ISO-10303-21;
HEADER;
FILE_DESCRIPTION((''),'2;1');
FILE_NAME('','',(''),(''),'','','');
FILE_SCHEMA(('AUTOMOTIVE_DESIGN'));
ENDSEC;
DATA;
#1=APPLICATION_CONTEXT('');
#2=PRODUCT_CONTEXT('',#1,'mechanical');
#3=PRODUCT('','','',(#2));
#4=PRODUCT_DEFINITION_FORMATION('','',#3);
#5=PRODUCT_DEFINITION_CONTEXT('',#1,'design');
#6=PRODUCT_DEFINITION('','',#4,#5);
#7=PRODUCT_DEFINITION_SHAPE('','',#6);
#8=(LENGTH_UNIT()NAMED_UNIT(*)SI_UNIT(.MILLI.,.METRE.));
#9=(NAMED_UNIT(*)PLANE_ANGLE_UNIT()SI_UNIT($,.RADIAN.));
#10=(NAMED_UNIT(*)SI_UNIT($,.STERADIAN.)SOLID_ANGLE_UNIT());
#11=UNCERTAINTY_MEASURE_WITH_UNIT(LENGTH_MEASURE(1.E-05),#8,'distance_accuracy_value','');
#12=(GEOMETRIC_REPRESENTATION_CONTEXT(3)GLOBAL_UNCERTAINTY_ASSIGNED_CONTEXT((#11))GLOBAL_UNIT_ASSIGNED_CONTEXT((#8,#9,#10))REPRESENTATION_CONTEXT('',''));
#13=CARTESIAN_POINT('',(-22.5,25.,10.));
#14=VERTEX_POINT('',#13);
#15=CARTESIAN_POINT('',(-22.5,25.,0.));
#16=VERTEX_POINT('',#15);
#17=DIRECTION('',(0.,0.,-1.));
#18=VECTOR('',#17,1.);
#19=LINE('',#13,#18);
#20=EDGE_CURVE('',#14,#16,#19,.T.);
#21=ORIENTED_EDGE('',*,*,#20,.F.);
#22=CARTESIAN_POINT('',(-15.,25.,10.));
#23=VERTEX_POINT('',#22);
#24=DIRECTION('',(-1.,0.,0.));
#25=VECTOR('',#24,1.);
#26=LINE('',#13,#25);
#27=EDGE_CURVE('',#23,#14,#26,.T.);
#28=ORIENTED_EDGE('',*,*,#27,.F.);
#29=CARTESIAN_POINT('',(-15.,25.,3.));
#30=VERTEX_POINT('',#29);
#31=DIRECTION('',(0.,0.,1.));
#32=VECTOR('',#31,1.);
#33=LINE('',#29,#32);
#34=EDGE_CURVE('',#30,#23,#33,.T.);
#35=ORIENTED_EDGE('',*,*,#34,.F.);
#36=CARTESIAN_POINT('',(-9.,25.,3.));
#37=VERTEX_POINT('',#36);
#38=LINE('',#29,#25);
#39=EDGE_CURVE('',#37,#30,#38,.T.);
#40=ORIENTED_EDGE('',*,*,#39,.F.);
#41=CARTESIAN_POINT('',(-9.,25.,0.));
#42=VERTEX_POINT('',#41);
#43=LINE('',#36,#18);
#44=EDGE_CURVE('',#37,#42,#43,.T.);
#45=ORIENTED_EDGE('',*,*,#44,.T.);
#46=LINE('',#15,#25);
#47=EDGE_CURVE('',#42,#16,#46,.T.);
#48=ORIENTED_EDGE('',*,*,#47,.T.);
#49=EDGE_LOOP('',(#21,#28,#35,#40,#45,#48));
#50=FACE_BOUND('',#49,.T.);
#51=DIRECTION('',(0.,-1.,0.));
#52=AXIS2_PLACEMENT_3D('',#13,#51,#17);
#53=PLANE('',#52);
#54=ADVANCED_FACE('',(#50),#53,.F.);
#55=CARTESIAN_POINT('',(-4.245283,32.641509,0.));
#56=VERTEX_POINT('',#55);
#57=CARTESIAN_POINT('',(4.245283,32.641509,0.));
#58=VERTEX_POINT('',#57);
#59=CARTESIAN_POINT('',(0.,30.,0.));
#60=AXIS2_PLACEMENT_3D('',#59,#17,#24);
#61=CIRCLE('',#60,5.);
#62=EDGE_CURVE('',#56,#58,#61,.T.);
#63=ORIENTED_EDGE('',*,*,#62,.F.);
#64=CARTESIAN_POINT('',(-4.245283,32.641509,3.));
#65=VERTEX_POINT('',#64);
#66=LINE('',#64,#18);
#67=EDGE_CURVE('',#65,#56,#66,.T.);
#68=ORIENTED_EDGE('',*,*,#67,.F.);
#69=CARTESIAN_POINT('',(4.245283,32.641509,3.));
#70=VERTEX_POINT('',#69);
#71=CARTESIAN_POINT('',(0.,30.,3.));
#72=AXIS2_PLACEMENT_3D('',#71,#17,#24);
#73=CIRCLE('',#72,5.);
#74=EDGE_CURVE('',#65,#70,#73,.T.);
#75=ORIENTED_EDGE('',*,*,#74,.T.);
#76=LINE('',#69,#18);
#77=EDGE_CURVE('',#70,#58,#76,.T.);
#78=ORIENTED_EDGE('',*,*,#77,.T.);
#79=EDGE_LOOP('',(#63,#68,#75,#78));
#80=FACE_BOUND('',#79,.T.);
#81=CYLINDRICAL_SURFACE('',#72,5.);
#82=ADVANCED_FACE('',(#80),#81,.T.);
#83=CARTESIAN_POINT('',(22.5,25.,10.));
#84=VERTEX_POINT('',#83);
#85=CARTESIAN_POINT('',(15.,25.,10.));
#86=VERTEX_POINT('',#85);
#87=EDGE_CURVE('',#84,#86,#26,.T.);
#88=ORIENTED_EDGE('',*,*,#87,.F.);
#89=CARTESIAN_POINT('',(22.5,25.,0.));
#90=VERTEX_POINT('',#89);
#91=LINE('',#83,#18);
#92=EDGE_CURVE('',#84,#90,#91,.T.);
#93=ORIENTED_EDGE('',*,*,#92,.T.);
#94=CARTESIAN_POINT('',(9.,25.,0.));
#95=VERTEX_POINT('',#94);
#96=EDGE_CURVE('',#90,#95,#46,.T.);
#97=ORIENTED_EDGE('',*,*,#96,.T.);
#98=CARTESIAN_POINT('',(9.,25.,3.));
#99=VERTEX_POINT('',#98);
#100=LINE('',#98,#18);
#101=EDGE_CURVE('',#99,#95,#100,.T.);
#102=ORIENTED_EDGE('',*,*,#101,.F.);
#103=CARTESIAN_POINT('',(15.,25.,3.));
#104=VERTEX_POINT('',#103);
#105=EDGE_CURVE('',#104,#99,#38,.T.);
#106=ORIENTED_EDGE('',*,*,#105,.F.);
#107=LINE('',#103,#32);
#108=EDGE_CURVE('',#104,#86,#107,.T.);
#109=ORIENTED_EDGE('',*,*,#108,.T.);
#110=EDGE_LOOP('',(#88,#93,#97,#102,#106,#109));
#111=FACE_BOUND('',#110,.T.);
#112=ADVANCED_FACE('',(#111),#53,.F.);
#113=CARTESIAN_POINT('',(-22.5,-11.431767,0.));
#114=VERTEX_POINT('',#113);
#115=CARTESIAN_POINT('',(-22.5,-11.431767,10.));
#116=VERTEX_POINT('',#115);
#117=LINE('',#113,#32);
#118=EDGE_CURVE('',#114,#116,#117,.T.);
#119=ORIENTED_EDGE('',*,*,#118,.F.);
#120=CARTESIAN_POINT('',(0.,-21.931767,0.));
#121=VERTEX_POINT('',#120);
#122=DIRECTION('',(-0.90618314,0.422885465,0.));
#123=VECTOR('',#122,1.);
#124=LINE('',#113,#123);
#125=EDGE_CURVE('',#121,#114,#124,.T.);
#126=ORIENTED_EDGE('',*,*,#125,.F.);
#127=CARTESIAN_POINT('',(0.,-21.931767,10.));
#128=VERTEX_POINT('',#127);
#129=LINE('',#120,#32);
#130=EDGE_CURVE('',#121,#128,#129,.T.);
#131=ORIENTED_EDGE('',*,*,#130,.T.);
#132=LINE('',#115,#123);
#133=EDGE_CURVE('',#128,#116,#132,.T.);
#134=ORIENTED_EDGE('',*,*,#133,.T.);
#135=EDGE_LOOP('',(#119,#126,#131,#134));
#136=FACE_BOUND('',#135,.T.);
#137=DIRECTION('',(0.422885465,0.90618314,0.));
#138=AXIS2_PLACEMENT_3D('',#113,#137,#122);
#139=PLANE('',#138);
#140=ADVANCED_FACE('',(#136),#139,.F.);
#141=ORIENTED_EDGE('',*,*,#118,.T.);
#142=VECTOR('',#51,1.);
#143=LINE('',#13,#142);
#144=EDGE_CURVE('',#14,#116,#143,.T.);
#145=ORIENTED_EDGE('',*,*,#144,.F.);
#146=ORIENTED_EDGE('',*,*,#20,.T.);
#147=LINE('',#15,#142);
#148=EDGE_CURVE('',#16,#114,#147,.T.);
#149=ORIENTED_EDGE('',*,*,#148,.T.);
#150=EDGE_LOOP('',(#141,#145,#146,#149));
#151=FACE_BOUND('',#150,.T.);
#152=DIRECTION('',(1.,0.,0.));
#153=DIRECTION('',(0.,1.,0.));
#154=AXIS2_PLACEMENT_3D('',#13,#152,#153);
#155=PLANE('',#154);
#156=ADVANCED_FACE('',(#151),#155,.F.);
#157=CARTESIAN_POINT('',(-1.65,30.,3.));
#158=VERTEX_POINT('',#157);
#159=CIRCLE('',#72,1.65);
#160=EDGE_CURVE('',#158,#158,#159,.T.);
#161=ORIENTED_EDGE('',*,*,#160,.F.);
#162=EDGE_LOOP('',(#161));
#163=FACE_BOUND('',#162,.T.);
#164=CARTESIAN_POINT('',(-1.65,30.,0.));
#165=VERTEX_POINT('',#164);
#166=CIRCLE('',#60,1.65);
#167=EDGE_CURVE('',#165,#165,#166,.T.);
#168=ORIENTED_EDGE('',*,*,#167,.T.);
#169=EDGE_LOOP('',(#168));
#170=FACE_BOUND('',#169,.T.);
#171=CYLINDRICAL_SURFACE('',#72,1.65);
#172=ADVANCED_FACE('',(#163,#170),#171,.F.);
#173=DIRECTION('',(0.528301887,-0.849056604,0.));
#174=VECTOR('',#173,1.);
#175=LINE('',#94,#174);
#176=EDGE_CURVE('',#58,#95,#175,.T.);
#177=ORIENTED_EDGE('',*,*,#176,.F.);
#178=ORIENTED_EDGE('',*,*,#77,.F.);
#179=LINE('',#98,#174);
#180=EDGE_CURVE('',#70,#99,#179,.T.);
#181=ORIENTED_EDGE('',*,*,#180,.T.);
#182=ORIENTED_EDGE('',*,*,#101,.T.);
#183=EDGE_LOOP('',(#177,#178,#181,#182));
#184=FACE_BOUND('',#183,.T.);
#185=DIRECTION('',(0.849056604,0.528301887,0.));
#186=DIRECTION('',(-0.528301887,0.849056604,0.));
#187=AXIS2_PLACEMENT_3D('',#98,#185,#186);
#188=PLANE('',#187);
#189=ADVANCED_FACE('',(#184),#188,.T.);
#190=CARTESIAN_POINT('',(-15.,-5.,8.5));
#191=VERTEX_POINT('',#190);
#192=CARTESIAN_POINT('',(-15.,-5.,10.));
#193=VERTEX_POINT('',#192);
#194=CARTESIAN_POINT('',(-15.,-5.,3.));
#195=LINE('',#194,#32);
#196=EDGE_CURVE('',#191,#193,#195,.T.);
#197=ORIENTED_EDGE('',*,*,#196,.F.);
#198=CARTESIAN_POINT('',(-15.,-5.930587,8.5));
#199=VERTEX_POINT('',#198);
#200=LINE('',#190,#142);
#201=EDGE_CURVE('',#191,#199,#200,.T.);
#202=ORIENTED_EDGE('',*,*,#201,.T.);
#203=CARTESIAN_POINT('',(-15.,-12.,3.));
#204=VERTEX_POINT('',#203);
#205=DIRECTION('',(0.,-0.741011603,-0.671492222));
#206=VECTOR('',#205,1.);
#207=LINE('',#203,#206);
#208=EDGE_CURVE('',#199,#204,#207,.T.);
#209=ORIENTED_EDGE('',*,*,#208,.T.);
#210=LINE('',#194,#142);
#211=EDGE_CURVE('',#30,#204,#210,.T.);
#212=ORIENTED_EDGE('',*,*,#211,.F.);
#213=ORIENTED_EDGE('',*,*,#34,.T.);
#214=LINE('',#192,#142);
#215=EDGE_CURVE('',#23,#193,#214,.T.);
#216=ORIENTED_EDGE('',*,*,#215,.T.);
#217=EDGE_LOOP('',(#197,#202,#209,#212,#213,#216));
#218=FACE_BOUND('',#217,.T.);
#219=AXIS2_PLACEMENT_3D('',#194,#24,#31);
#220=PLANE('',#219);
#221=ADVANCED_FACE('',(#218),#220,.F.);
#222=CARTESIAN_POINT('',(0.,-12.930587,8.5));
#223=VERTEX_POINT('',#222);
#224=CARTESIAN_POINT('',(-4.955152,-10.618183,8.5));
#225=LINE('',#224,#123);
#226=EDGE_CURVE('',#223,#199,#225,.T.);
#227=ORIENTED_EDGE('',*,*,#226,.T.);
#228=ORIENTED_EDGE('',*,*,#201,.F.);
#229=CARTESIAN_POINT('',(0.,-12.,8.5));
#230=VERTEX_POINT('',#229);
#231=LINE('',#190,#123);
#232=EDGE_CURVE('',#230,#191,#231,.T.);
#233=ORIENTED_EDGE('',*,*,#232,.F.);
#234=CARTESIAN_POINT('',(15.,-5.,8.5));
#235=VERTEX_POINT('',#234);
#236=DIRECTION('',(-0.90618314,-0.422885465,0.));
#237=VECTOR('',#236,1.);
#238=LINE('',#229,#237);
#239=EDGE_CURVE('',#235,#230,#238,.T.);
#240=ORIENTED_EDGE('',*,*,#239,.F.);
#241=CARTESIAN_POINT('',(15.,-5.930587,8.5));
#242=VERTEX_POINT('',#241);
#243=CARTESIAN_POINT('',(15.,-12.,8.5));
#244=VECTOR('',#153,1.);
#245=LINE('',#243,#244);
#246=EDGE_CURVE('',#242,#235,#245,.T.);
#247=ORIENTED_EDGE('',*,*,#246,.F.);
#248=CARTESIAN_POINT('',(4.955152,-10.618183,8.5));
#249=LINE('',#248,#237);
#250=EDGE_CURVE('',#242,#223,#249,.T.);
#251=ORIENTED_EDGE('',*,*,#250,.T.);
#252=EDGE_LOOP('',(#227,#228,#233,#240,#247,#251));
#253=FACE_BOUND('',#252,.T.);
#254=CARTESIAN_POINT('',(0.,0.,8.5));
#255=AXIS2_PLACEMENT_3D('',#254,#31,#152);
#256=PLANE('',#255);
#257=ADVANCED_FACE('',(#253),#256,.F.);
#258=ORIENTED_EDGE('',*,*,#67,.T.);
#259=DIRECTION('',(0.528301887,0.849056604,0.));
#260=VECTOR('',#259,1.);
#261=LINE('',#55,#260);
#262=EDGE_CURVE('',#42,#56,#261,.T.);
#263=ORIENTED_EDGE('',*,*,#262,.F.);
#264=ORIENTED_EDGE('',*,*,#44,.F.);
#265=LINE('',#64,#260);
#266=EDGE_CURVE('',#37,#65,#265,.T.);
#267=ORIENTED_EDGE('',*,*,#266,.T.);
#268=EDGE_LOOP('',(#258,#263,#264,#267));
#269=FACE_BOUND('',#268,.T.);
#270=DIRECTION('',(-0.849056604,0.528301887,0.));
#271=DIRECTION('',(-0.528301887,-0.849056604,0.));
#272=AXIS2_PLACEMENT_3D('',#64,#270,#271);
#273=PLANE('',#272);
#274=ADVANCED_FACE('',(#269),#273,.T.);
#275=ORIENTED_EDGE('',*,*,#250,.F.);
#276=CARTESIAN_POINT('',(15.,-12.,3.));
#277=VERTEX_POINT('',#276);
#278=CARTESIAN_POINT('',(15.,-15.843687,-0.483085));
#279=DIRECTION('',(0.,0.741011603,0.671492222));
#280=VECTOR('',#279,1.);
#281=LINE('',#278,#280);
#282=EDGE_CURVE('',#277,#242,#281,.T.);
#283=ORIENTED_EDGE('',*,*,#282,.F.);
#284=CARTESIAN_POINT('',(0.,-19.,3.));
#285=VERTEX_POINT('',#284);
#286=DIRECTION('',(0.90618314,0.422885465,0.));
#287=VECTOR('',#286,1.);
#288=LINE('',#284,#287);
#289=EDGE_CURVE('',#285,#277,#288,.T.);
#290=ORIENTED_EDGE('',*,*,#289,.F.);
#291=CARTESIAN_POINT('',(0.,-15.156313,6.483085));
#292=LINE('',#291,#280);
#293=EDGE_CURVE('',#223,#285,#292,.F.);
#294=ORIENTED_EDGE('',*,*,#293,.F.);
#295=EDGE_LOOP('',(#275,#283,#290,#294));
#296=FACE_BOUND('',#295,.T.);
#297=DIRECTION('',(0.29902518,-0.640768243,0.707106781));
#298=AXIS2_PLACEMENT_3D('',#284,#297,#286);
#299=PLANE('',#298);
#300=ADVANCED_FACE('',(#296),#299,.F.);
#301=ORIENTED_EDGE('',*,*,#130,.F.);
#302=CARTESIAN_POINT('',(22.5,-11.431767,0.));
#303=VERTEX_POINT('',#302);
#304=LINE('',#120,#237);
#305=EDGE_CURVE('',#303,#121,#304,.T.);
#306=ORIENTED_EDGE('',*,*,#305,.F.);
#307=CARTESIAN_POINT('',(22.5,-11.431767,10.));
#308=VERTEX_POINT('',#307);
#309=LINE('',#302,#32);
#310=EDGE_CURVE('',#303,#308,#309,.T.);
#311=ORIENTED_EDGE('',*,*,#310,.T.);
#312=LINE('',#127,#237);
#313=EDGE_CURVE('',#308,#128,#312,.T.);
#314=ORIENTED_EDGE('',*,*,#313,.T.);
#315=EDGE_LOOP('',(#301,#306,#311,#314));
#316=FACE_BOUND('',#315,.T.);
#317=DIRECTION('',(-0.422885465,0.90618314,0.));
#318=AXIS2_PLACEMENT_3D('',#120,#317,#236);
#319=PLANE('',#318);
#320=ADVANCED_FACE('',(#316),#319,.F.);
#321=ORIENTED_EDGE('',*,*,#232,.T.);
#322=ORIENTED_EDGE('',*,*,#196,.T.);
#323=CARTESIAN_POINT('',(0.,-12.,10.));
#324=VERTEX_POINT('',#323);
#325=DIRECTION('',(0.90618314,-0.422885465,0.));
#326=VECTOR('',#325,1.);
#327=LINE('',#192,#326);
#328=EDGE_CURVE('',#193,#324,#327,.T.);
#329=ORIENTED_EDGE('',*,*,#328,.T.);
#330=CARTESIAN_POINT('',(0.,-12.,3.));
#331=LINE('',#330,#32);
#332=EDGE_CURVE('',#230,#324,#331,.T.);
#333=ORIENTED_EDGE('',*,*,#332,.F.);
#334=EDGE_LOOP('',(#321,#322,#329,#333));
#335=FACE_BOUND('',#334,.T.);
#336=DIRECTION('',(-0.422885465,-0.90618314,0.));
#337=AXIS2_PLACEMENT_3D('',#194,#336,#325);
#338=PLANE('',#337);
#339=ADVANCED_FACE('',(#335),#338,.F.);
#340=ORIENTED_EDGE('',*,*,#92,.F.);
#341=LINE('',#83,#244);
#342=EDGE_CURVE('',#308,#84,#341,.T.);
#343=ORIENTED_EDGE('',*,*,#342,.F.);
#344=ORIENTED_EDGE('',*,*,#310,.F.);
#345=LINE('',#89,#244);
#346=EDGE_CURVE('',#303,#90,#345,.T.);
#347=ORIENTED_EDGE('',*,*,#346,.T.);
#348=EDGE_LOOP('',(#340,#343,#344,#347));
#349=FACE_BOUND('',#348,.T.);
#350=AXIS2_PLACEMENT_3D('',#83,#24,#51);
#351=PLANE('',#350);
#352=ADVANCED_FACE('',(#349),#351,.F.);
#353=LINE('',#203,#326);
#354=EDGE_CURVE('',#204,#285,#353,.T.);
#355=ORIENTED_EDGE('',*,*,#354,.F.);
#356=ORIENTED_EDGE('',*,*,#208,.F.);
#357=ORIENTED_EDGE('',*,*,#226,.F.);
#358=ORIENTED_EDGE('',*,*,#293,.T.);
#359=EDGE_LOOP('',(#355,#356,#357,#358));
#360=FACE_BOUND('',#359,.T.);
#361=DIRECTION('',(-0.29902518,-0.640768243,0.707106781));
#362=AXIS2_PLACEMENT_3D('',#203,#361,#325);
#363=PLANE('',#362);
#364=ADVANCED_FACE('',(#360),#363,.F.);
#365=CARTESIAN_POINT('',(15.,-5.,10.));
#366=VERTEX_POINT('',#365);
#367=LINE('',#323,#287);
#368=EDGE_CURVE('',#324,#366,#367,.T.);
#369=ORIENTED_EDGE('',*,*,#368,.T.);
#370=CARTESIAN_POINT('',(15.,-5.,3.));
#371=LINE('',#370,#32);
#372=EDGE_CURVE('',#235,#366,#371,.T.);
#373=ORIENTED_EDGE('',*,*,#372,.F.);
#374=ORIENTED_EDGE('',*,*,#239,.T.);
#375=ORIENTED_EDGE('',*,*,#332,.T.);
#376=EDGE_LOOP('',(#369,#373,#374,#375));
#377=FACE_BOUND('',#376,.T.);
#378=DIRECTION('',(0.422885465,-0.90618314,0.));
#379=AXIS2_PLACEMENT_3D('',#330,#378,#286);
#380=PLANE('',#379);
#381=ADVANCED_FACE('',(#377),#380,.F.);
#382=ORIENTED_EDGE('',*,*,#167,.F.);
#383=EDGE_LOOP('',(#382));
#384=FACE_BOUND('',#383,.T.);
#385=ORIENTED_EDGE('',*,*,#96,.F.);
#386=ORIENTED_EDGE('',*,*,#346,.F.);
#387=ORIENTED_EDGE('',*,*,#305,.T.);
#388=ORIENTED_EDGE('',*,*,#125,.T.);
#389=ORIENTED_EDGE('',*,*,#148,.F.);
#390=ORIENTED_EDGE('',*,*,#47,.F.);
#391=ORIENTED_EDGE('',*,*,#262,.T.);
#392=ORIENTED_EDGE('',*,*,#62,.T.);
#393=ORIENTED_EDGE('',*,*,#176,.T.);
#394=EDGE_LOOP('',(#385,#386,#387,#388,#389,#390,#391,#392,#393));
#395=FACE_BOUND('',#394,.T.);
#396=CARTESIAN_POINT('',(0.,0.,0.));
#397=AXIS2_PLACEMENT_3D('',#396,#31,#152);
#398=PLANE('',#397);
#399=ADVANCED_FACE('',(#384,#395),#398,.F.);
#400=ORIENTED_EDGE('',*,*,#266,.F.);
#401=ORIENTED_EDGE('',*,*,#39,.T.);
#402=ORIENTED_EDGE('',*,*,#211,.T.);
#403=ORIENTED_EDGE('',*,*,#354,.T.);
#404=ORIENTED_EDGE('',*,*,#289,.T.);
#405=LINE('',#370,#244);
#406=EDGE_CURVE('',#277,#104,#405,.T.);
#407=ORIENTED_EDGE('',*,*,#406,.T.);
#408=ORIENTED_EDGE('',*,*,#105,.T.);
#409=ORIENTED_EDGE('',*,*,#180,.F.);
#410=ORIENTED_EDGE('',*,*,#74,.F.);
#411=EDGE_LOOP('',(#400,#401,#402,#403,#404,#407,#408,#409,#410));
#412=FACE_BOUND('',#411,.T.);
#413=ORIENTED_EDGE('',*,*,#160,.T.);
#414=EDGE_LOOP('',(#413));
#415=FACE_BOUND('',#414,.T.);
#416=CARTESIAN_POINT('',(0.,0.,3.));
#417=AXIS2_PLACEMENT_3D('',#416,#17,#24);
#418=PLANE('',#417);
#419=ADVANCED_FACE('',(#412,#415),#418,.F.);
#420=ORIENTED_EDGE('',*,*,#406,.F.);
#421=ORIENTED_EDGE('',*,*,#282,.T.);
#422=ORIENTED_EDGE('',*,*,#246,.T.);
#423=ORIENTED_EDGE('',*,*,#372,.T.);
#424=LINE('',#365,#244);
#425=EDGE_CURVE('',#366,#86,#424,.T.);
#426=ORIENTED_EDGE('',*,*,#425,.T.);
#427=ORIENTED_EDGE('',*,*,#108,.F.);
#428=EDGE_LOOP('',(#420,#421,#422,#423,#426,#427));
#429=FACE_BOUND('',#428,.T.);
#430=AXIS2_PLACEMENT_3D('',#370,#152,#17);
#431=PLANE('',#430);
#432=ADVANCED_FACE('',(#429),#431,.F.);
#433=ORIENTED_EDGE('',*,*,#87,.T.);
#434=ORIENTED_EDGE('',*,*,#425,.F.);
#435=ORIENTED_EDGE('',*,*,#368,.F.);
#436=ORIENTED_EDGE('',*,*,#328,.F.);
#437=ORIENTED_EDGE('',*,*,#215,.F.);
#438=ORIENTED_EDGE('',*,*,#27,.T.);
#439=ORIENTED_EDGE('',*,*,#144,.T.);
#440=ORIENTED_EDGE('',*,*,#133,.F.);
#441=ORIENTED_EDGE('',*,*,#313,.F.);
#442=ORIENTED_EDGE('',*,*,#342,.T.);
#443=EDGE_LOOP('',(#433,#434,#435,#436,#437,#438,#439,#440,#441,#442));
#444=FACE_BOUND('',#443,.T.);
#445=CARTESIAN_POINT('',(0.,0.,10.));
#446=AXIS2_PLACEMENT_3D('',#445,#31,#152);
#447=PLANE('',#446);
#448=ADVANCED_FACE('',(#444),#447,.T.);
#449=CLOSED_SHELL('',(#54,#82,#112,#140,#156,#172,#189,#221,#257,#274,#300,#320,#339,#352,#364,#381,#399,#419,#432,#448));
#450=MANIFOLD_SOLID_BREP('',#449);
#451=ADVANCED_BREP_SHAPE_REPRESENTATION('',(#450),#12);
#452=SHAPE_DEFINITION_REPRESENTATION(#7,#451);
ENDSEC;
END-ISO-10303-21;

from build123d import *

# Parameters (mm, degrees)
ESBO_O1_W                = 45
ESBO_O1_H                = 50
RESSALTO_EXTRUS_O1_DEPTH = 10
CORTE_EXTRUS_O1_DEPTH    = 7
CORTE_EXTRUS_O2_DEPTH    = 5.5
CHANFRO1_SIZE            = 5.5
ESBO_O4_R                = 1.65
RESSALTO_EXTRUS_O2_DEPTH = 3
CORTE_EXTRUS_O3_DEPTH    = 43.793106922


with BuildPart() as part:
    # Esboço1 → Ressalto-extrusão1 (new body)
    with BuildSketch(Plane.XY):
        Rectangle(ESBO_O1_W, ESBO_O1_H)
    extrude(amount=RESSALTO_EXTRUS_O1_DEPTH)

    # Esboço2 → Corte-extrusão1 (cut)
    with BuildSketch(Plane.XY.offset(10)):
        Polygon((-15, -5), (0, -12), (15, -5), (15, 25), (-15, 25), align=None)
    extrude(amount=-CORTE_EXTRUS_O1_DEPTH, mode=Mode.SUBTRACT)

    # Esboço3 → Corte-extrusão2 (cut)
    with BuildSketch(Plane.XY.offset(3)):
        Polygon((-15, -5), (-15, -12), (0, -19), (15, -12), (15, -5), align=None)
    extrude(amount=CORTE_EXTRUS_O2_DEPTH, mode=Mode.SUBTRACT)

    # Chanfro1
    chanfro1_edges = [part.edges().sort_by_distance(p)[0] for p in [
        (-7.5, -15.5, 8.5),
        (7.5, -15.5, 8.5),
    ]]
    chamfer(chanfro1_edges, length=CHANFRO1_SIZE - 0.0001)  # a hair under: the kernel refuses the full size

    # Esboço4 → Ressalto-extrusão2 (add)
    with BuildSketch(Plane(origin=(0, 0, 0), x_dir=(-1, 0, 0), z_dir=(0, 0, -1))):
        with BuildLine():
            Line((4.245283019, 32.641509434), (9, 25))
            Line((9, 25), (-9, 25))
            Line((-9, 25), (-4.245283019, 32.641509434))
            ThreePointArc((-4.245283019, 32.641509434), (0, 35), (4.245283019, 32.641509434))
        make_face()
        with Locations((0, 30)):
            Circle(ESBO_O4_R, mode=Mode.SUBTRACT)
    extrude(amount=-RESSALTO_EXTRUS_O2_DEPTH)

    # Esboço5 → Corte-extrusão3 (cut, through all)
    with BuildSketch(Plane.XY.offset(10)):
        Polygon((-22.5, -11.431767214), (0, -21.931767214), (22.5, -11.431767214), (22.5, -32.501990612), (-22.5, -32.501990612), align=None)
    extrude(amount=-CORTE_EXTRUS_O3_DEPTH, mode=Mode.SUBTRACT)


solid = part.part
